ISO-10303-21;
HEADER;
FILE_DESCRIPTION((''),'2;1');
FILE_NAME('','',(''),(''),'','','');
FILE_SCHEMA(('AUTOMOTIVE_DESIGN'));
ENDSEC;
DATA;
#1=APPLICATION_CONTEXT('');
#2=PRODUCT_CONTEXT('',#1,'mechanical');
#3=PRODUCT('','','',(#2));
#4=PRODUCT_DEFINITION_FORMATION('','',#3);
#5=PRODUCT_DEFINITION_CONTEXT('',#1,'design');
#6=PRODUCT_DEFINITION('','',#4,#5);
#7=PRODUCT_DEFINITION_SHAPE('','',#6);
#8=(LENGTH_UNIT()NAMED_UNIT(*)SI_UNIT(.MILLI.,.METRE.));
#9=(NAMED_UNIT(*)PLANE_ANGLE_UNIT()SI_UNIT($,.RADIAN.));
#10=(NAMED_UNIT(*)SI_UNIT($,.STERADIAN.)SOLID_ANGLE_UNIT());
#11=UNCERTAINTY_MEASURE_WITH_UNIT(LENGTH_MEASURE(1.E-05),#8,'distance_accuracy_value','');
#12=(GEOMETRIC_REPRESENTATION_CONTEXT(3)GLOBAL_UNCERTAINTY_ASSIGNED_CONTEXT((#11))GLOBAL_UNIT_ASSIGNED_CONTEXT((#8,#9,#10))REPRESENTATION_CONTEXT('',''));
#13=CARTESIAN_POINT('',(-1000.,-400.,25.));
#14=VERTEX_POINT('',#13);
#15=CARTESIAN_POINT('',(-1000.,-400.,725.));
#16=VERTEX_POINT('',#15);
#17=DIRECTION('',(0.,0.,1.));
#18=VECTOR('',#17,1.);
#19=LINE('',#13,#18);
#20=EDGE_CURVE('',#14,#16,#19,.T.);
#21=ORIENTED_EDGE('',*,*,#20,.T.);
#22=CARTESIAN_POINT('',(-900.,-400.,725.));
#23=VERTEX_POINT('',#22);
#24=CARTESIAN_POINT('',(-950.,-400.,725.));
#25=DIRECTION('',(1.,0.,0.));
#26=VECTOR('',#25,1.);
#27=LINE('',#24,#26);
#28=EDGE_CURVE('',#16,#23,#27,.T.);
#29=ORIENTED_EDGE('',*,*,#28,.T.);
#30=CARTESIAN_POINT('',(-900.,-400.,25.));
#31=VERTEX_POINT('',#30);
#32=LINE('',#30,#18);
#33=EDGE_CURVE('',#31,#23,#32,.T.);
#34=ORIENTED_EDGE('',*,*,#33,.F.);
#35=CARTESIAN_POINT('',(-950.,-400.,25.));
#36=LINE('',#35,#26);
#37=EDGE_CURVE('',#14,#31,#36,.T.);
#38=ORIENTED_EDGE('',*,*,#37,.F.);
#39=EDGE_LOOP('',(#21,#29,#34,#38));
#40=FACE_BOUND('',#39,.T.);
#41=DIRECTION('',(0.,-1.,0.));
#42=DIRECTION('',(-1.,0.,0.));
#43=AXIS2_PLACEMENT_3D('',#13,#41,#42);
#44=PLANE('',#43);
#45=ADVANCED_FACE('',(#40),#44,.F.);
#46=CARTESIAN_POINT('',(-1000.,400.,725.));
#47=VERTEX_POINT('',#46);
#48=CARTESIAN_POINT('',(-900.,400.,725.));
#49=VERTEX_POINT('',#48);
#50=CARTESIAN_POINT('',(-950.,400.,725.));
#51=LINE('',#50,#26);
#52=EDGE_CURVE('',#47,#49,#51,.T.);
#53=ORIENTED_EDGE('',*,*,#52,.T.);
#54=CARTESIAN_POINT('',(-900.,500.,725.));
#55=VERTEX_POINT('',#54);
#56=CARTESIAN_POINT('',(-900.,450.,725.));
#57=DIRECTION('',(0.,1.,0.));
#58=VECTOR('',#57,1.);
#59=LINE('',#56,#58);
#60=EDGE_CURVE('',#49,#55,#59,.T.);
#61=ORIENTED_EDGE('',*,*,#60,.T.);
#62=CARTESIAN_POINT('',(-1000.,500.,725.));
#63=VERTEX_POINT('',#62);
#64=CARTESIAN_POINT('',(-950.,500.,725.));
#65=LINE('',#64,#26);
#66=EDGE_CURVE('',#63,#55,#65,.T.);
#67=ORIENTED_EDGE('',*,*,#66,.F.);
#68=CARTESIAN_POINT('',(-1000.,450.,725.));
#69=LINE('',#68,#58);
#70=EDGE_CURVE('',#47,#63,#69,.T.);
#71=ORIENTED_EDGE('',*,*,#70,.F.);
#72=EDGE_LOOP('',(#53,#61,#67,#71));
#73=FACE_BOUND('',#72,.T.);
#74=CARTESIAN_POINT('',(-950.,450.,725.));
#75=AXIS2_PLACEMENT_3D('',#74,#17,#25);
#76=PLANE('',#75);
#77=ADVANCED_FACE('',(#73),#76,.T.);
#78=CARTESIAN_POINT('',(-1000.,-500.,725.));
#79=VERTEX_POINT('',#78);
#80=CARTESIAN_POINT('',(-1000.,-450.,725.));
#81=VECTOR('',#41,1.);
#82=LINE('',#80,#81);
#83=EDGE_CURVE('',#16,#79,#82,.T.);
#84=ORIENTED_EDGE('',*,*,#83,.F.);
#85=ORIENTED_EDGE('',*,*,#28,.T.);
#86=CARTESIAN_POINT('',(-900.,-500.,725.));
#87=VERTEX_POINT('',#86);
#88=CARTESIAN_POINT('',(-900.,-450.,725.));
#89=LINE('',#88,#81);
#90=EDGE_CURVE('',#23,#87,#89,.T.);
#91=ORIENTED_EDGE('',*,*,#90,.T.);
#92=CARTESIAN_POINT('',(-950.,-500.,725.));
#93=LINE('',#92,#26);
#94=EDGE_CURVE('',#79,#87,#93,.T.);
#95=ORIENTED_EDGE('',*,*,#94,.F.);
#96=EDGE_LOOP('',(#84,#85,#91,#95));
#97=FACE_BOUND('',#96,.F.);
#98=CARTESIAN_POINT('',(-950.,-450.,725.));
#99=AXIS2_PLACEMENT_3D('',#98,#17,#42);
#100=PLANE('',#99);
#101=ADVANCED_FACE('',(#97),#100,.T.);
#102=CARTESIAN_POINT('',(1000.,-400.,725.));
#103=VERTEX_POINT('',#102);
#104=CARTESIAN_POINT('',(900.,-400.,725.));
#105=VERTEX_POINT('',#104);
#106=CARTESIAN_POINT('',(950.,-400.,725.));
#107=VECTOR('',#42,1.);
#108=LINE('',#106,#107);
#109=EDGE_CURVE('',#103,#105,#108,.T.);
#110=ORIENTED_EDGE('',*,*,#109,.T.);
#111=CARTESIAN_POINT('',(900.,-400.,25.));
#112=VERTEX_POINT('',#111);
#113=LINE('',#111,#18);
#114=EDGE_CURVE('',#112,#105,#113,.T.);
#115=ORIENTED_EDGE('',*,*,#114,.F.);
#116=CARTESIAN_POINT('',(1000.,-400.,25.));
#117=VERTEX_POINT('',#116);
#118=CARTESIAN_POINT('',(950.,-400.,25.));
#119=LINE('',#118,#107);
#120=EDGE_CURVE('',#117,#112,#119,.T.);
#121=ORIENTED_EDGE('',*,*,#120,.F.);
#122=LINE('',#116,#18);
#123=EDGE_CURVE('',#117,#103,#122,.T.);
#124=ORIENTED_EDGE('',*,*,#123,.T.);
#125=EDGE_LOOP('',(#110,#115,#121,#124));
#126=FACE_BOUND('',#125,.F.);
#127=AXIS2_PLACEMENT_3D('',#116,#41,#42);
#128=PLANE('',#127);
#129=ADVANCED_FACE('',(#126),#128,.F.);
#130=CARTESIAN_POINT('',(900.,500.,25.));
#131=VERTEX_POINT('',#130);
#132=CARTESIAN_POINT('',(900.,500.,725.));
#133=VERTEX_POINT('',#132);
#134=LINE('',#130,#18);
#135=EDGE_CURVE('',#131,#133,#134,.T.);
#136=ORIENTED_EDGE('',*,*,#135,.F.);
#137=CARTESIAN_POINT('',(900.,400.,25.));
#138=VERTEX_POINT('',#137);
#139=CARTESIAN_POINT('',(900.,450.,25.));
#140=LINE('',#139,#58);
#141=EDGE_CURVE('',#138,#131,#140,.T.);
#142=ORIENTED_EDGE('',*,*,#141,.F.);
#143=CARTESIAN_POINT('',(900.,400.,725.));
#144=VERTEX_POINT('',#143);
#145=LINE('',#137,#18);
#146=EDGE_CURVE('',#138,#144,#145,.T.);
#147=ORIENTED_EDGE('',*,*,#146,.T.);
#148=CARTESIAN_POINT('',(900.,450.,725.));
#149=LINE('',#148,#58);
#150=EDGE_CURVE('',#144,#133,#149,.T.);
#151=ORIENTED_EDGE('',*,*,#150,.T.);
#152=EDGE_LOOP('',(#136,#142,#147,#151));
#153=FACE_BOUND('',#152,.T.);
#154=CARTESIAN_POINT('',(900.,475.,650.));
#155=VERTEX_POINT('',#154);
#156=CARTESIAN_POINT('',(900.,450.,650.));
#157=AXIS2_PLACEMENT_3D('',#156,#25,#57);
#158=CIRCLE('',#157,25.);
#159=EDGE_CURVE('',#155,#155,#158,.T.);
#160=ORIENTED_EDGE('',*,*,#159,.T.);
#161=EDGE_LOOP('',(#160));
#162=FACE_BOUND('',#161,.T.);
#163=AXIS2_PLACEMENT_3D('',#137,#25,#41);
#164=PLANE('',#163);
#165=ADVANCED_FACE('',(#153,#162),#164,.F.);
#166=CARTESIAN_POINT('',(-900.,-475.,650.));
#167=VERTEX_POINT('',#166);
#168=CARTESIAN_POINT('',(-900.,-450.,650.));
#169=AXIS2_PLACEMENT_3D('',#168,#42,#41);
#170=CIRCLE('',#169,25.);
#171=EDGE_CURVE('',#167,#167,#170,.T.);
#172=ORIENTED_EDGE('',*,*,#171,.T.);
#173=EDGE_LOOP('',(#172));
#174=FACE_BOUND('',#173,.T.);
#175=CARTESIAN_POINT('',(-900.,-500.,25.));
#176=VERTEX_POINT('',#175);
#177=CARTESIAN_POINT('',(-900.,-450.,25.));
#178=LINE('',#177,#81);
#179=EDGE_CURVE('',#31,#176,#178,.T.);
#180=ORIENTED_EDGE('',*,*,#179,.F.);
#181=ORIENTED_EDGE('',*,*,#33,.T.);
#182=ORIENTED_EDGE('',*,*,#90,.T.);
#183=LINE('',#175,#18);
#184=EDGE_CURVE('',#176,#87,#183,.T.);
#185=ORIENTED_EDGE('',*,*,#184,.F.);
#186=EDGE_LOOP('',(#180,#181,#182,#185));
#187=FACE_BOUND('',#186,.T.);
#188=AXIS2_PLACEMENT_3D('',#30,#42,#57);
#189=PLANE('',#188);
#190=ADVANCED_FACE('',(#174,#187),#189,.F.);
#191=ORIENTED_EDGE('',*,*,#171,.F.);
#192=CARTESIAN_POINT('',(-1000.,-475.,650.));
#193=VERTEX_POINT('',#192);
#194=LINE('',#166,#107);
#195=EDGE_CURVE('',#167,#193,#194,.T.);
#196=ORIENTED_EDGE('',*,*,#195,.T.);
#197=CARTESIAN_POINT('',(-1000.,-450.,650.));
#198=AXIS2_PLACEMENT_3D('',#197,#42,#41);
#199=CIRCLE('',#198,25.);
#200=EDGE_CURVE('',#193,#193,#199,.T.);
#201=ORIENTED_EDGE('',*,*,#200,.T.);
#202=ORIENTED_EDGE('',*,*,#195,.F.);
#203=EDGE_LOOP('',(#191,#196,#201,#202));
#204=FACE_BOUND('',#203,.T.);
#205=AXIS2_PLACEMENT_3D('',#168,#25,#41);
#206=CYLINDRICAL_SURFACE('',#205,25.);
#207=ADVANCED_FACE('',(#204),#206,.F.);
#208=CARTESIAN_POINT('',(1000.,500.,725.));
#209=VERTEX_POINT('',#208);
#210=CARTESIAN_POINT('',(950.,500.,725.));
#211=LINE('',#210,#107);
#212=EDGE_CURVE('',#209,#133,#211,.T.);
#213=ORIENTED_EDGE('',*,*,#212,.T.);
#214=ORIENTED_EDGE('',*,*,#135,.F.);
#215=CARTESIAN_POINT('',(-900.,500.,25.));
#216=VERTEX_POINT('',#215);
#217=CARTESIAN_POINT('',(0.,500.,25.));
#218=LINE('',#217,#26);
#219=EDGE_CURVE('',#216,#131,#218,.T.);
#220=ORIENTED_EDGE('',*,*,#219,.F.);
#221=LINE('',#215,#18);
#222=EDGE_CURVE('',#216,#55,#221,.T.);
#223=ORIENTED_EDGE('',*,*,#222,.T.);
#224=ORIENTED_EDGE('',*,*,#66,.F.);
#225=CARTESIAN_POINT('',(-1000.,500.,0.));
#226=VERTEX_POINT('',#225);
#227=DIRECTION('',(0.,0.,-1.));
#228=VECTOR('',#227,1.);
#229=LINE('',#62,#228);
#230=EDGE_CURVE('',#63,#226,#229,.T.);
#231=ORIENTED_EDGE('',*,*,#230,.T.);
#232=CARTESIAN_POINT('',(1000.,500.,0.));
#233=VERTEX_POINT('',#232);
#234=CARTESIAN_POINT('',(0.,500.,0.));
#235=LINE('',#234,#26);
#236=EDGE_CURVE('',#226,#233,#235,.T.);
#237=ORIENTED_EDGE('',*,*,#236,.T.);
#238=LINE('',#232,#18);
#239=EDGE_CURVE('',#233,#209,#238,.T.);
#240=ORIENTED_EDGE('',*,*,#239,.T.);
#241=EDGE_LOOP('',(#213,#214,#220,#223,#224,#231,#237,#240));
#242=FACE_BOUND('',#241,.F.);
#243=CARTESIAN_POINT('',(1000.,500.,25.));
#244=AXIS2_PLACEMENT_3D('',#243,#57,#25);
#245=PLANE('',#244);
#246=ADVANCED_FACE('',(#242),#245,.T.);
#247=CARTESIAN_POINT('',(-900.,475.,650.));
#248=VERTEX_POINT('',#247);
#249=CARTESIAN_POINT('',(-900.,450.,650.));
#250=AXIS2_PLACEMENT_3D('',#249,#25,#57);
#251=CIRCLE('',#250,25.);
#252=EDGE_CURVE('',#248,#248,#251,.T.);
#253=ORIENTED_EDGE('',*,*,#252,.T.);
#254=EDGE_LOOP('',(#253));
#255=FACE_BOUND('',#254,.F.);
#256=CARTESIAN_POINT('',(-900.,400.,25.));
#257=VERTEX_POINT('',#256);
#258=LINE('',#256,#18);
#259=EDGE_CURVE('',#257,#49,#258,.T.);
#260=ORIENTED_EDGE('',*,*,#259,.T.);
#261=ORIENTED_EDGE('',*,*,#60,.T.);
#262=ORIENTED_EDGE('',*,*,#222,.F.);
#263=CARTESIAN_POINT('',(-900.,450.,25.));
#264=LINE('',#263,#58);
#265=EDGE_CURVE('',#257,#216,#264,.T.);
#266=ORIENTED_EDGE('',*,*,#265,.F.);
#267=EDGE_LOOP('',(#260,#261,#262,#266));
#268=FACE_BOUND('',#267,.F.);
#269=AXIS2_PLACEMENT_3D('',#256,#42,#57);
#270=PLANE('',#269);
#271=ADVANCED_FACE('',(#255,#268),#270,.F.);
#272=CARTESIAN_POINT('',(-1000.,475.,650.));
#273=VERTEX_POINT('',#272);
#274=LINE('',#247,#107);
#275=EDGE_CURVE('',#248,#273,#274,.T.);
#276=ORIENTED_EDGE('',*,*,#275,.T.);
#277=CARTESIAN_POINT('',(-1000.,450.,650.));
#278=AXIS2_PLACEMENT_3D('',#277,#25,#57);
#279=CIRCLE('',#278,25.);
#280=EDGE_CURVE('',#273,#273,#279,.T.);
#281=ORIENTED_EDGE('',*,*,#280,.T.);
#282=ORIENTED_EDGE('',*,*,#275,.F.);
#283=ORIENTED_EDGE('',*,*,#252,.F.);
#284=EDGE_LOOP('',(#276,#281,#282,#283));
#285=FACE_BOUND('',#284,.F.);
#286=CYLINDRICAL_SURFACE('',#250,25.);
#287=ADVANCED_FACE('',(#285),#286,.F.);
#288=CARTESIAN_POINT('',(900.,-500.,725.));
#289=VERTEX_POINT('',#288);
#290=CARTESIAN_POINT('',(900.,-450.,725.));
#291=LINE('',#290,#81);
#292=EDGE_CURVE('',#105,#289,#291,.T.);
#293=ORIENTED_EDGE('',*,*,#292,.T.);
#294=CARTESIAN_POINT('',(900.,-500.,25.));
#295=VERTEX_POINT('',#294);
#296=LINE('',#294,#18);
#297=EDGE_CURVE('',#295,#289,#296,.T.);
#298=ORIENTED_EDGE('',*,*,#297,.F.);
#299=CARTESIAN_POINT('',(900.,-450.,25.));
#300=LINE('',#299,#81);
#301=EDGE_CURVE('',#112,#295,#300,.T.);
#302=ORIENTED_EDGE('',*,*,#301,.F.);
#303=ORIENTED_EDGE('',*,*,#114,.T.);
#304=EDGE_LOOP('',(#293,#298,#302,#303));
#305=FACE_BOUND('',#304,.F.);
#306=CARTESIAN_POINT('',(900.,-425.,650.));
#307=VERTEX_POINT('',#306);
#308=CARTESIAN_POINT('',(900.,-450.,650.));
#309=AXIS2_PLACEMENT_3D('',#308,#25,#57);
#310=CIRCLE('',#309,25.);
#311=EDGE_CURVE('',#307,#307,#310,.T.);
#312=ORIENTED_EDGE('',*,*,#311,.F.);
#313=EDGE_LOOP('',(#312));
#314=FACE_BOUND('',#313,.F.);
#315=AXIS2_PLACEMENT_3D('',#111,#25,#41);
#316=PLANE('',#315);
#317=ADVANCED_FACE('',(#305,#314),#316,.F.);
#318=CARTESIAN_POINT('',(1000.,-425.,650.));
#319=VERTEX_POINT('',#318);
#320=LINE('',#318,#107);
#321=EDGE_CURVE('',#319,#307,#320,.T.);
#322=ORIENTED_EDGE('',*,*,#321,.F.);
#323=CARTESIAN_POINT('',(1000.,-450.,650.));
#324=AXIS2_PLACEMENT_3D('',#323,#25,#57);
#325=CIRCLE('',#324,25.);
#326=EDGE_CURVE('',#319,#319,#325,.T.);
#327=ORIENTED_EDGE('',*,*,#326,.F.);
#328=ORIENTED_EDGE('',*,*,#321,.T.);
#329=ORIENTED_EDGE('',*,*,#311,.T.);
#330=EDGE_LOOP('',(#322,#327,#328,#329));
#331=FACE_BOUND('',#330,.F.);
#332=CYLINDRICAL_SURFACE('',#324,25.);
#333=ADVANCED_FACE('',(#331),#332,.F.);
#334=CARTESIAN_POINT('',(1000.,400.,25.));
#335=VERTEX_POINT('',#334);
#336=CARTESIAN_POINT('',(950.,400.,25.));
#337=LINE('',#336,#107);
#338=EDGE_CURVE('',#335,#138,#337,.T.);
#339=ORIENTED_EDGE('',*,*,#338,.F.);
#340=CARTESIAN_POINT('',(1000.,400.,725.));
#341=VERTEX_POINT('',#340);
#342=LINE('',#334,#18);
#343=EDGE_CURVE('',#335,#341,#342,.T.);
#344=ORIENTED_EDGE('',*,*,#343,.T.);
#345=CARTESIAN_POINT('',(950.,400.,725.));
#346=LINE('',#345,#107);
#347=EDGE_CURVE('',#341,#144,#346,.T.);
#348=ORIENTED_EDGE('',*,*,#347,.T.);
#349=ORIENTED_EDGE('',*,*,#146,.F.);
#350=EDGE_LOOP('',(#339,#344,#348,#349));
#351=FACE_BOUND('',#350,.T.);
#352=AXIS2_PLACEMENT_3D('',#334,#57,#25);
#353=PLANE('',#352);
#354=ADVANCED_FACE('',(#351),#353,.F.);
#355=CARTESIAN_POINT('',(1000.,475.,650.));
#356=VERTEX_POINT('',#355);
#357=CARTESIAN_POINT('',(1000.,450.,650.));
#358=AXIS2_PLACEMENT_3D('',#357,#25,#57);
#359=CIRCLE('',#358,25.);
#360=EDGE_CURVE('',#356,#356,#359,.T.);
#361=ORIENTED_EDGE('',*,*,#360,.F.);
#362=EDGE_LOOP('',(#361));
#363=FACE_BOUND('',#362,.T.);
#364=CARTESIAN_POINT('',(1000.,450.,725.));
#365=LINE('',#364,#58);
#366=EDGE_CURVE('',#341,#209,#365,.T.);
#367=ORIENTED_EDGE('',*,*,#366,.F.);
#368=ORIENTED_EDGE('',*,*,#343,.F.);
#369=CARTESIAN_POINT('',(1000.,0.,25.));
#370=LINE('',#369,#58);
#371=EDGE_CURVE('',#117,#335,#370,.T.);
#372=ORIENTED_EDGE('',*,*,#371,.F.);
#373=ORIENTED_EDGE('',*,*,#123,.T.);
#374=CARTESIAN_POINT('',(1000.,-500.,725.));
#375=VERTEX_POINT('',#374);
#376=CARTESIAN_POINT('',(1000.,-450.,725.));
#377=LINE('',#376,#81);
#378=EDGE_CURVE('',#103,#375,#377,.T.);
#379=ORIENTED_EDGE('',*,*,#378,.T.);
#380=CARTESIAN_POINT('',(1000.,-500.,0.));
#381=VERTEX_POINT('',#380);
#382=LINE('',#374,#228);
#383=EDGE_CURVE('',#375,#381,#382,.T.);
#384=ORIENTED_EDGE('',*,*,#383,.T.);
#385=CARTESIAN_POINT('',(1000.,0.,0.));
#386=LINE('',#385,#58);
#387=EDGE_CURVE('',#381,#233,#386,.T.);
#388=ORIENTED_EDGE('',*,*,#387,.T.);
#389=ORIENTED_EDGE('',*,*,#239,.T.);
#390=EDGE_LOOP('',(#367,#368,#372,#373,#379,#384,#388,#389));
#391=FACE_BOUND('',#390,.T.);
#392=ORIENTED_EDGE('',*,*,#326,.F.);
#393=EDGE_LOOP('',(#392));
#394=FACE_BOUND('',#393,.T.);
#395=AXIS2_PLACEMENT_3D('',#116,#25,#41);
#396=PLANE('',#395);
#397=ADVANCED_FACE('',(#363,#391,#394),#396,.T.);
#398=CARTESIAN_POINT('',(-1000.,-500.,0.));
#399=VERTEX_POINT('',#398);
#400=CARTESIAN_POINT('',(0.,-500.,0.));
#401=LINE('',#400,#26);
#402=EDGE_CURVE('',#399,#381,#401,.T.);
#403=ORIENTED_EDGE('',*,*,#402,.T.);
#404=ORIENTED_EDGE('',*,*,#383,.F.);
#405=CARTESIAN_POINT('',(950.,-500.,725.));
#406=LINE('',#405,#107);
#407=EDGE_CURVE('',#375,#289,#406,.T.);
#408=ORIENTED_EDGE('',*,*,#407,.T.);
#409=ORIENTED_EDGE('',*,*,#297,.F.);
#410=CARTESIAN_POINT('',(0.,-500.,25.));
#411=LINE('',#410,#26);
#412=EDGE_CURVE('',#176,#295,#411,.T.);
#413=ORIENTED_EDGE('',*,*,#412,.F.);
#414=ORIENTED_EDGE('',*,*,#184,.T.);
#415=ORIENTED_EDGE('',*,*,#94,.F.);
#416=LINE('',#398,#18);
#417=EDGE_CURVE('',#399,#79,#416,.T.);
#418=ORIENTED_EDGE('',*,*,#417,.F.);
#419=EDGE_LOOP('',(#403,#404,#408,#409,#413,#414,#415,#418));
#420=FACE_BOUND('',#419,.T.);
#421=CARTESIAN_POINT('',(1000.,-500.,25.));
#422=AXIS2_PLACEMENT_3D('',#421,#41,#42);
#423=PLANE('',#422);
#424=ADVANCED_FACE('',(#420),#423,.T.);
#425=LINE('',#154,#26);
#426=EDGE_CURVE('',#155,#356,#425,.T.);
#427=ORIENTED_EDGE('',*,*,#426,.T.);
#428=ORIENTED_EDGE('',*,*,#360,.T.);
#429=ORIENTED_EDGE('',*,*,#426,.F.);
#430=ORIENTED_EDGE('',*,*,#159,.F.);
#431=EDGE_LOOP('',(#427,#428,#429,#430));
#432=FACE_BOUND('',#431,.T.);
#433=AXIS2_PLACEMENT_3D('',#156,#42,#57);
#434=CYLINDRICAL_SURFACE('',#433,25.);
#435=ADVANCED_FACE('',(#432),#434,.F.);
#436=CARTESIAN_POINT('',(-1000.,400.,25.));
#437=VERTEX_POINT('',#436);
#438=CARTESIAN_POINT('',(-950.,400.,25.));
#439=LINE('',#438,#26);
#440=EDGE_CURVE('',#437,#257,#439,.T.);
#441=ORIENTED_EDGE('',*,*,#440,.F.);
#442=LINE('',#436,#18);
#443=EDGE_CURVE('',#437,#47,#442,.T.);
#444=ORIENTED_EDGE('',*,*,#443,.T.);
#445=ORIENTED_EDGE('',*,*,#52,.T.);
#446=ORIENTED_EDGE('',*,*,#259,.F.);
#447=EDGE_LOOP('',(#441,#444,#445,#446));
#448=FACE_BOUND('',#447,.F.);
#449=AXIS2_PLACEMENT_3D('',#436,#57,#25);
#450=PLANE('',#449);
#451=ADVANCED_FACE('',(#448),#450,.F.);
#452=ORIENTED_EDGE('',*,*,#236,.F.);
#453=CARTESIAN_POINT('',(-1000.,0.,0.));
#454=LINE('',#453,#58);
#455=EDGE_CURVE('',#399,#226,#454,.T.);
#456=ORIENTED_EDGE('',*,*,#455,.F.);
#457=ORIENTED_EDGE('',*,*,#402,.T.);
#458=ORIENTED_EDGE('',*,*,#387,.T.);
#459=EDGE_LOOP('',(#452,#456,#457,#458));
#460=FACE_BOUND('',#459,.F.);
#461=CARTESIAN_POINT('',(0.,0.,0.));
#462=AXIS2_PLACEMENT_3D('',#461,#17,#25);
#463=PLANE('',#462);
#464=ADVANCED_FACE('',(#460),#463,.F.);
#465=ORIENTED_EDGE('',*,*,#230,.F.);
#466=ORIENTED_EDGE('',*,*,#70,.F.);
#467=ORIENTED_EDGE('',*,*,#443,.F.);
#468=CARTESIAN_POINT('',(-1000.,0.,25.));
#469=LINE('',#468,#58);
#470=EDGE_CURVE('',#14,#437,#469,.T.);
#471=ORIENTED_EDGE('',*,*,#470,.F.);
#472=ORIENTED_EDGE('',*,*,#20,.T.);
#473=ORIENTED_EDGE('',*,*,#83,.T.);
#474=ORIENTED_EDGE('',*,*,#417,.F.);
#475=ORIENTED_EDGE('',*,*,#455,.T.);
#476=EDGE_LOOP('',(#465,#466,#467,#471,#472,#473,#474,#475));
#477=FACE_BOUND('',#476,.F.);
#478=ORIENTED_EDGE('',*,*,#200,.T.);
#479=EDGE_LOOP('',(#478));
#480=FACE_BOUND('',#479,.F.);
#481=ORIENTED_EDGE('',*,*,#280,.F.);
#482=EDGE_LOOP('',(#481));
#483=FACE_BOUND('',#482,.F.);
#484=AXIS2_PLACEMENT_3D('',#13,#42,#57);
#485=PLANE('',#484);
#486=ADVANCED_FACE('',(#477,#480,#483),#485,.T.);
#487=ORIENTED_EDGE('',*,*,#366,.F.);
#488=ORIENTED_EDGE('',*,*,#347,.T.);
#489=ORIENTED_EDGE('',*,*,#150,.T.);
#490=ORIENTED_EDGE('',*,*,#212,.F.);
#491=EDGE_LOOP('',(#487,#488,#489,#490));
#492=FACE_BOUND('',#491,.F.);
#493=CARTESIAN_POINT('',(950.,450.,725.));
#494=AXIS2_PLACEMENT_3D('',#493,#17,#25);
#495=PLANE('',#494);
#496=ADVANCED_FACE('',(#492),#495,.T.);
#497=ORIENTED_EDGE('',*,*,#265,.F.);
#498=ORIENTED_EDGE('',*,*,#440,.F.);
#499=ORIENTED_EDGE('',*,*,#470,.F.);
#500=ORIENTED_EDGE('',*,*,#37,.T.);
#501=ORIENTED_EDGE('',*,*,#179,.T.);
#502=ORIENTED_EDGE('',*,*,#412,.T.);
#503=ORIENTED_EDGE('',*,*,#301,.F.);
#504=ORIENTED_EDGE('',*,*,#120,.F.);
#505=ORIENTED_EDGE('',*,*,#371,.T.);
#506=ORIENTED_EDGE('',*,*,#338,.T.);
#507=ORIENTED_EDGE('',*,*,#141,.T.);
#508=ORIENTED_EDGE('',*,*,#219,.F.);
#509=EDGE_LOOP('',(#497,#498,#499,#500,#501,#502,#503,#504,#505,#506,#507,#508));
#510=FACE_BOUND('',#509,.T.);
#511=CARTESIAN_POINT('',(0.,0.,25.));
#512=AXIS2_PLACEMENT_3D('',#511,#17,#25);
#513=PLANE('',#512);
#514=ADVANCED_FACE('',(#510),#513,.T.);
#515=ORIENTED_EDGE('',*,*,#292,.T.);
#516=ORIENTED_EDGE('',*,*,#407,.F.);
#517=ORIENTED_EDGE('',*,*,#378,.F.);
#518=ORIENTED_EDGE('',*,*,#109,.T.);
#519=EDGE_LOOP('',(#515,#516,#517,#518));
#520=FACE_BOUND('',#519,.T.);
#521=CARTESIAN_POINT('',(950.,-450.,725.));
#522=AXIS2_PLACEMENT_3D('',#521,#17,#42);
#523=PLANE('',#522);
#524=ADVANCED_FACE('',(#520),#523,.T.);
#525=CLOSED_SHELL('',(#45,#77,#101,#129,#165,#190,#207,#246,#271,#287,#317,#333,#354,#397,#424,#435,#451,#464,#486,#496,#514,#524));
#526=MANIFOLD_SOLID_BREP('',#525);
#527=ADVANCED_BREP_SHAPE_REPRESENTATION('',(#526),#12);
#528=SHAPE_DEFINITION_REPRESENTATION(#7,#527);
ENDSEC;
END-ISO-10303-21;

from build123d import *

# Parameters (mm, degrees)
F2_W             = 2000
F2_H             = 1000
F3_DEPTH         = 25
F4_W             = 100
F4_H             = 100
F5_DEPTH         = 700
F5_COPIES2_COUNT = 2
F6_R             = 25
F7_DEPTH         = 100
F7_COPIES2_COUNT = 2
F7_COPIES2_PITCH = 2102.379604


# Not quite as in the source:
# - a pattern or mirror of a feature is missing from the dataset's text; its kind, count and spacing are read off the source's solid


with BuildPart() as f3:
    # F2 (on Top) → F3 (new body)
    with BuildSketch(Plane.XY):
        Rectangle(F2_W, F2_H)
    extrude(amount=F3_DEPTH)

    # F4 (on face) → F5 (join)
    with BuildSketch(Plane.XY.offset(25)):
        with Locations((-950, 450)):
            Rectangle(F4_W, F4_H)
    f5 = extrude(amount=F5_DEPTH)

    # F5_copies: F5 across plane
    add(f5.mirror(Plane(origin=(0, 0, 0), x_dir=(0, 0, 1), z_dir=(1, 0, 0))))

    # F5_copies1: F5 across plane
    add(f5.mirror(Plane(origin=(0, 0, 0), x_dir=(0, 0, -1), z_dir=(0, -1, 0))))

    # F5_copies2: F5 ×2 about axis
    f5_copies2_axis = Axis((0, 0, 0), (0, 0, 1))
    for i in range(1, F5_COPIES2_COUNT):
        add(f5.rotate(f5_copies2_axis, i * 360 / F5_COPIES2_COUNT))

    # F6 (on face) → F7 (cut, through all)
    with BuildSketch(Plane.YZ.offset(-900)):
        with Locations((450, 650)):
            Circle(F6_R)
    f7 = extrude(amount=-F7_DEPTH, mode=Mode.SUBTRACT)

    # F7_copies: F7 across plane
    add(f7.mirror(Plane(origin=(0, 0, 0), x_dir=(0, 0, 1), z_dir=(1, 0, 0))), mode=Mode.SUBTRACT)

    # F7_copies1: F7 across plane
    add(f7.mirror(Plane(origin=(0, 0, 0), x_dir=(0, 0, -1), z_dir=(0, -1, 0))), mode=Mode.SUBTRACT)

    # F7_copies2: F7 ×2
    with Locations(*[Vector(0.9037378389, -0.4280863447, 0) * (i * F7_COPIES2_PITCH) for i in range(1, F7_COPIES2_COUNT)]):
        add(f7, mode=Mode.SUBTRACT)


solid = f3.part
